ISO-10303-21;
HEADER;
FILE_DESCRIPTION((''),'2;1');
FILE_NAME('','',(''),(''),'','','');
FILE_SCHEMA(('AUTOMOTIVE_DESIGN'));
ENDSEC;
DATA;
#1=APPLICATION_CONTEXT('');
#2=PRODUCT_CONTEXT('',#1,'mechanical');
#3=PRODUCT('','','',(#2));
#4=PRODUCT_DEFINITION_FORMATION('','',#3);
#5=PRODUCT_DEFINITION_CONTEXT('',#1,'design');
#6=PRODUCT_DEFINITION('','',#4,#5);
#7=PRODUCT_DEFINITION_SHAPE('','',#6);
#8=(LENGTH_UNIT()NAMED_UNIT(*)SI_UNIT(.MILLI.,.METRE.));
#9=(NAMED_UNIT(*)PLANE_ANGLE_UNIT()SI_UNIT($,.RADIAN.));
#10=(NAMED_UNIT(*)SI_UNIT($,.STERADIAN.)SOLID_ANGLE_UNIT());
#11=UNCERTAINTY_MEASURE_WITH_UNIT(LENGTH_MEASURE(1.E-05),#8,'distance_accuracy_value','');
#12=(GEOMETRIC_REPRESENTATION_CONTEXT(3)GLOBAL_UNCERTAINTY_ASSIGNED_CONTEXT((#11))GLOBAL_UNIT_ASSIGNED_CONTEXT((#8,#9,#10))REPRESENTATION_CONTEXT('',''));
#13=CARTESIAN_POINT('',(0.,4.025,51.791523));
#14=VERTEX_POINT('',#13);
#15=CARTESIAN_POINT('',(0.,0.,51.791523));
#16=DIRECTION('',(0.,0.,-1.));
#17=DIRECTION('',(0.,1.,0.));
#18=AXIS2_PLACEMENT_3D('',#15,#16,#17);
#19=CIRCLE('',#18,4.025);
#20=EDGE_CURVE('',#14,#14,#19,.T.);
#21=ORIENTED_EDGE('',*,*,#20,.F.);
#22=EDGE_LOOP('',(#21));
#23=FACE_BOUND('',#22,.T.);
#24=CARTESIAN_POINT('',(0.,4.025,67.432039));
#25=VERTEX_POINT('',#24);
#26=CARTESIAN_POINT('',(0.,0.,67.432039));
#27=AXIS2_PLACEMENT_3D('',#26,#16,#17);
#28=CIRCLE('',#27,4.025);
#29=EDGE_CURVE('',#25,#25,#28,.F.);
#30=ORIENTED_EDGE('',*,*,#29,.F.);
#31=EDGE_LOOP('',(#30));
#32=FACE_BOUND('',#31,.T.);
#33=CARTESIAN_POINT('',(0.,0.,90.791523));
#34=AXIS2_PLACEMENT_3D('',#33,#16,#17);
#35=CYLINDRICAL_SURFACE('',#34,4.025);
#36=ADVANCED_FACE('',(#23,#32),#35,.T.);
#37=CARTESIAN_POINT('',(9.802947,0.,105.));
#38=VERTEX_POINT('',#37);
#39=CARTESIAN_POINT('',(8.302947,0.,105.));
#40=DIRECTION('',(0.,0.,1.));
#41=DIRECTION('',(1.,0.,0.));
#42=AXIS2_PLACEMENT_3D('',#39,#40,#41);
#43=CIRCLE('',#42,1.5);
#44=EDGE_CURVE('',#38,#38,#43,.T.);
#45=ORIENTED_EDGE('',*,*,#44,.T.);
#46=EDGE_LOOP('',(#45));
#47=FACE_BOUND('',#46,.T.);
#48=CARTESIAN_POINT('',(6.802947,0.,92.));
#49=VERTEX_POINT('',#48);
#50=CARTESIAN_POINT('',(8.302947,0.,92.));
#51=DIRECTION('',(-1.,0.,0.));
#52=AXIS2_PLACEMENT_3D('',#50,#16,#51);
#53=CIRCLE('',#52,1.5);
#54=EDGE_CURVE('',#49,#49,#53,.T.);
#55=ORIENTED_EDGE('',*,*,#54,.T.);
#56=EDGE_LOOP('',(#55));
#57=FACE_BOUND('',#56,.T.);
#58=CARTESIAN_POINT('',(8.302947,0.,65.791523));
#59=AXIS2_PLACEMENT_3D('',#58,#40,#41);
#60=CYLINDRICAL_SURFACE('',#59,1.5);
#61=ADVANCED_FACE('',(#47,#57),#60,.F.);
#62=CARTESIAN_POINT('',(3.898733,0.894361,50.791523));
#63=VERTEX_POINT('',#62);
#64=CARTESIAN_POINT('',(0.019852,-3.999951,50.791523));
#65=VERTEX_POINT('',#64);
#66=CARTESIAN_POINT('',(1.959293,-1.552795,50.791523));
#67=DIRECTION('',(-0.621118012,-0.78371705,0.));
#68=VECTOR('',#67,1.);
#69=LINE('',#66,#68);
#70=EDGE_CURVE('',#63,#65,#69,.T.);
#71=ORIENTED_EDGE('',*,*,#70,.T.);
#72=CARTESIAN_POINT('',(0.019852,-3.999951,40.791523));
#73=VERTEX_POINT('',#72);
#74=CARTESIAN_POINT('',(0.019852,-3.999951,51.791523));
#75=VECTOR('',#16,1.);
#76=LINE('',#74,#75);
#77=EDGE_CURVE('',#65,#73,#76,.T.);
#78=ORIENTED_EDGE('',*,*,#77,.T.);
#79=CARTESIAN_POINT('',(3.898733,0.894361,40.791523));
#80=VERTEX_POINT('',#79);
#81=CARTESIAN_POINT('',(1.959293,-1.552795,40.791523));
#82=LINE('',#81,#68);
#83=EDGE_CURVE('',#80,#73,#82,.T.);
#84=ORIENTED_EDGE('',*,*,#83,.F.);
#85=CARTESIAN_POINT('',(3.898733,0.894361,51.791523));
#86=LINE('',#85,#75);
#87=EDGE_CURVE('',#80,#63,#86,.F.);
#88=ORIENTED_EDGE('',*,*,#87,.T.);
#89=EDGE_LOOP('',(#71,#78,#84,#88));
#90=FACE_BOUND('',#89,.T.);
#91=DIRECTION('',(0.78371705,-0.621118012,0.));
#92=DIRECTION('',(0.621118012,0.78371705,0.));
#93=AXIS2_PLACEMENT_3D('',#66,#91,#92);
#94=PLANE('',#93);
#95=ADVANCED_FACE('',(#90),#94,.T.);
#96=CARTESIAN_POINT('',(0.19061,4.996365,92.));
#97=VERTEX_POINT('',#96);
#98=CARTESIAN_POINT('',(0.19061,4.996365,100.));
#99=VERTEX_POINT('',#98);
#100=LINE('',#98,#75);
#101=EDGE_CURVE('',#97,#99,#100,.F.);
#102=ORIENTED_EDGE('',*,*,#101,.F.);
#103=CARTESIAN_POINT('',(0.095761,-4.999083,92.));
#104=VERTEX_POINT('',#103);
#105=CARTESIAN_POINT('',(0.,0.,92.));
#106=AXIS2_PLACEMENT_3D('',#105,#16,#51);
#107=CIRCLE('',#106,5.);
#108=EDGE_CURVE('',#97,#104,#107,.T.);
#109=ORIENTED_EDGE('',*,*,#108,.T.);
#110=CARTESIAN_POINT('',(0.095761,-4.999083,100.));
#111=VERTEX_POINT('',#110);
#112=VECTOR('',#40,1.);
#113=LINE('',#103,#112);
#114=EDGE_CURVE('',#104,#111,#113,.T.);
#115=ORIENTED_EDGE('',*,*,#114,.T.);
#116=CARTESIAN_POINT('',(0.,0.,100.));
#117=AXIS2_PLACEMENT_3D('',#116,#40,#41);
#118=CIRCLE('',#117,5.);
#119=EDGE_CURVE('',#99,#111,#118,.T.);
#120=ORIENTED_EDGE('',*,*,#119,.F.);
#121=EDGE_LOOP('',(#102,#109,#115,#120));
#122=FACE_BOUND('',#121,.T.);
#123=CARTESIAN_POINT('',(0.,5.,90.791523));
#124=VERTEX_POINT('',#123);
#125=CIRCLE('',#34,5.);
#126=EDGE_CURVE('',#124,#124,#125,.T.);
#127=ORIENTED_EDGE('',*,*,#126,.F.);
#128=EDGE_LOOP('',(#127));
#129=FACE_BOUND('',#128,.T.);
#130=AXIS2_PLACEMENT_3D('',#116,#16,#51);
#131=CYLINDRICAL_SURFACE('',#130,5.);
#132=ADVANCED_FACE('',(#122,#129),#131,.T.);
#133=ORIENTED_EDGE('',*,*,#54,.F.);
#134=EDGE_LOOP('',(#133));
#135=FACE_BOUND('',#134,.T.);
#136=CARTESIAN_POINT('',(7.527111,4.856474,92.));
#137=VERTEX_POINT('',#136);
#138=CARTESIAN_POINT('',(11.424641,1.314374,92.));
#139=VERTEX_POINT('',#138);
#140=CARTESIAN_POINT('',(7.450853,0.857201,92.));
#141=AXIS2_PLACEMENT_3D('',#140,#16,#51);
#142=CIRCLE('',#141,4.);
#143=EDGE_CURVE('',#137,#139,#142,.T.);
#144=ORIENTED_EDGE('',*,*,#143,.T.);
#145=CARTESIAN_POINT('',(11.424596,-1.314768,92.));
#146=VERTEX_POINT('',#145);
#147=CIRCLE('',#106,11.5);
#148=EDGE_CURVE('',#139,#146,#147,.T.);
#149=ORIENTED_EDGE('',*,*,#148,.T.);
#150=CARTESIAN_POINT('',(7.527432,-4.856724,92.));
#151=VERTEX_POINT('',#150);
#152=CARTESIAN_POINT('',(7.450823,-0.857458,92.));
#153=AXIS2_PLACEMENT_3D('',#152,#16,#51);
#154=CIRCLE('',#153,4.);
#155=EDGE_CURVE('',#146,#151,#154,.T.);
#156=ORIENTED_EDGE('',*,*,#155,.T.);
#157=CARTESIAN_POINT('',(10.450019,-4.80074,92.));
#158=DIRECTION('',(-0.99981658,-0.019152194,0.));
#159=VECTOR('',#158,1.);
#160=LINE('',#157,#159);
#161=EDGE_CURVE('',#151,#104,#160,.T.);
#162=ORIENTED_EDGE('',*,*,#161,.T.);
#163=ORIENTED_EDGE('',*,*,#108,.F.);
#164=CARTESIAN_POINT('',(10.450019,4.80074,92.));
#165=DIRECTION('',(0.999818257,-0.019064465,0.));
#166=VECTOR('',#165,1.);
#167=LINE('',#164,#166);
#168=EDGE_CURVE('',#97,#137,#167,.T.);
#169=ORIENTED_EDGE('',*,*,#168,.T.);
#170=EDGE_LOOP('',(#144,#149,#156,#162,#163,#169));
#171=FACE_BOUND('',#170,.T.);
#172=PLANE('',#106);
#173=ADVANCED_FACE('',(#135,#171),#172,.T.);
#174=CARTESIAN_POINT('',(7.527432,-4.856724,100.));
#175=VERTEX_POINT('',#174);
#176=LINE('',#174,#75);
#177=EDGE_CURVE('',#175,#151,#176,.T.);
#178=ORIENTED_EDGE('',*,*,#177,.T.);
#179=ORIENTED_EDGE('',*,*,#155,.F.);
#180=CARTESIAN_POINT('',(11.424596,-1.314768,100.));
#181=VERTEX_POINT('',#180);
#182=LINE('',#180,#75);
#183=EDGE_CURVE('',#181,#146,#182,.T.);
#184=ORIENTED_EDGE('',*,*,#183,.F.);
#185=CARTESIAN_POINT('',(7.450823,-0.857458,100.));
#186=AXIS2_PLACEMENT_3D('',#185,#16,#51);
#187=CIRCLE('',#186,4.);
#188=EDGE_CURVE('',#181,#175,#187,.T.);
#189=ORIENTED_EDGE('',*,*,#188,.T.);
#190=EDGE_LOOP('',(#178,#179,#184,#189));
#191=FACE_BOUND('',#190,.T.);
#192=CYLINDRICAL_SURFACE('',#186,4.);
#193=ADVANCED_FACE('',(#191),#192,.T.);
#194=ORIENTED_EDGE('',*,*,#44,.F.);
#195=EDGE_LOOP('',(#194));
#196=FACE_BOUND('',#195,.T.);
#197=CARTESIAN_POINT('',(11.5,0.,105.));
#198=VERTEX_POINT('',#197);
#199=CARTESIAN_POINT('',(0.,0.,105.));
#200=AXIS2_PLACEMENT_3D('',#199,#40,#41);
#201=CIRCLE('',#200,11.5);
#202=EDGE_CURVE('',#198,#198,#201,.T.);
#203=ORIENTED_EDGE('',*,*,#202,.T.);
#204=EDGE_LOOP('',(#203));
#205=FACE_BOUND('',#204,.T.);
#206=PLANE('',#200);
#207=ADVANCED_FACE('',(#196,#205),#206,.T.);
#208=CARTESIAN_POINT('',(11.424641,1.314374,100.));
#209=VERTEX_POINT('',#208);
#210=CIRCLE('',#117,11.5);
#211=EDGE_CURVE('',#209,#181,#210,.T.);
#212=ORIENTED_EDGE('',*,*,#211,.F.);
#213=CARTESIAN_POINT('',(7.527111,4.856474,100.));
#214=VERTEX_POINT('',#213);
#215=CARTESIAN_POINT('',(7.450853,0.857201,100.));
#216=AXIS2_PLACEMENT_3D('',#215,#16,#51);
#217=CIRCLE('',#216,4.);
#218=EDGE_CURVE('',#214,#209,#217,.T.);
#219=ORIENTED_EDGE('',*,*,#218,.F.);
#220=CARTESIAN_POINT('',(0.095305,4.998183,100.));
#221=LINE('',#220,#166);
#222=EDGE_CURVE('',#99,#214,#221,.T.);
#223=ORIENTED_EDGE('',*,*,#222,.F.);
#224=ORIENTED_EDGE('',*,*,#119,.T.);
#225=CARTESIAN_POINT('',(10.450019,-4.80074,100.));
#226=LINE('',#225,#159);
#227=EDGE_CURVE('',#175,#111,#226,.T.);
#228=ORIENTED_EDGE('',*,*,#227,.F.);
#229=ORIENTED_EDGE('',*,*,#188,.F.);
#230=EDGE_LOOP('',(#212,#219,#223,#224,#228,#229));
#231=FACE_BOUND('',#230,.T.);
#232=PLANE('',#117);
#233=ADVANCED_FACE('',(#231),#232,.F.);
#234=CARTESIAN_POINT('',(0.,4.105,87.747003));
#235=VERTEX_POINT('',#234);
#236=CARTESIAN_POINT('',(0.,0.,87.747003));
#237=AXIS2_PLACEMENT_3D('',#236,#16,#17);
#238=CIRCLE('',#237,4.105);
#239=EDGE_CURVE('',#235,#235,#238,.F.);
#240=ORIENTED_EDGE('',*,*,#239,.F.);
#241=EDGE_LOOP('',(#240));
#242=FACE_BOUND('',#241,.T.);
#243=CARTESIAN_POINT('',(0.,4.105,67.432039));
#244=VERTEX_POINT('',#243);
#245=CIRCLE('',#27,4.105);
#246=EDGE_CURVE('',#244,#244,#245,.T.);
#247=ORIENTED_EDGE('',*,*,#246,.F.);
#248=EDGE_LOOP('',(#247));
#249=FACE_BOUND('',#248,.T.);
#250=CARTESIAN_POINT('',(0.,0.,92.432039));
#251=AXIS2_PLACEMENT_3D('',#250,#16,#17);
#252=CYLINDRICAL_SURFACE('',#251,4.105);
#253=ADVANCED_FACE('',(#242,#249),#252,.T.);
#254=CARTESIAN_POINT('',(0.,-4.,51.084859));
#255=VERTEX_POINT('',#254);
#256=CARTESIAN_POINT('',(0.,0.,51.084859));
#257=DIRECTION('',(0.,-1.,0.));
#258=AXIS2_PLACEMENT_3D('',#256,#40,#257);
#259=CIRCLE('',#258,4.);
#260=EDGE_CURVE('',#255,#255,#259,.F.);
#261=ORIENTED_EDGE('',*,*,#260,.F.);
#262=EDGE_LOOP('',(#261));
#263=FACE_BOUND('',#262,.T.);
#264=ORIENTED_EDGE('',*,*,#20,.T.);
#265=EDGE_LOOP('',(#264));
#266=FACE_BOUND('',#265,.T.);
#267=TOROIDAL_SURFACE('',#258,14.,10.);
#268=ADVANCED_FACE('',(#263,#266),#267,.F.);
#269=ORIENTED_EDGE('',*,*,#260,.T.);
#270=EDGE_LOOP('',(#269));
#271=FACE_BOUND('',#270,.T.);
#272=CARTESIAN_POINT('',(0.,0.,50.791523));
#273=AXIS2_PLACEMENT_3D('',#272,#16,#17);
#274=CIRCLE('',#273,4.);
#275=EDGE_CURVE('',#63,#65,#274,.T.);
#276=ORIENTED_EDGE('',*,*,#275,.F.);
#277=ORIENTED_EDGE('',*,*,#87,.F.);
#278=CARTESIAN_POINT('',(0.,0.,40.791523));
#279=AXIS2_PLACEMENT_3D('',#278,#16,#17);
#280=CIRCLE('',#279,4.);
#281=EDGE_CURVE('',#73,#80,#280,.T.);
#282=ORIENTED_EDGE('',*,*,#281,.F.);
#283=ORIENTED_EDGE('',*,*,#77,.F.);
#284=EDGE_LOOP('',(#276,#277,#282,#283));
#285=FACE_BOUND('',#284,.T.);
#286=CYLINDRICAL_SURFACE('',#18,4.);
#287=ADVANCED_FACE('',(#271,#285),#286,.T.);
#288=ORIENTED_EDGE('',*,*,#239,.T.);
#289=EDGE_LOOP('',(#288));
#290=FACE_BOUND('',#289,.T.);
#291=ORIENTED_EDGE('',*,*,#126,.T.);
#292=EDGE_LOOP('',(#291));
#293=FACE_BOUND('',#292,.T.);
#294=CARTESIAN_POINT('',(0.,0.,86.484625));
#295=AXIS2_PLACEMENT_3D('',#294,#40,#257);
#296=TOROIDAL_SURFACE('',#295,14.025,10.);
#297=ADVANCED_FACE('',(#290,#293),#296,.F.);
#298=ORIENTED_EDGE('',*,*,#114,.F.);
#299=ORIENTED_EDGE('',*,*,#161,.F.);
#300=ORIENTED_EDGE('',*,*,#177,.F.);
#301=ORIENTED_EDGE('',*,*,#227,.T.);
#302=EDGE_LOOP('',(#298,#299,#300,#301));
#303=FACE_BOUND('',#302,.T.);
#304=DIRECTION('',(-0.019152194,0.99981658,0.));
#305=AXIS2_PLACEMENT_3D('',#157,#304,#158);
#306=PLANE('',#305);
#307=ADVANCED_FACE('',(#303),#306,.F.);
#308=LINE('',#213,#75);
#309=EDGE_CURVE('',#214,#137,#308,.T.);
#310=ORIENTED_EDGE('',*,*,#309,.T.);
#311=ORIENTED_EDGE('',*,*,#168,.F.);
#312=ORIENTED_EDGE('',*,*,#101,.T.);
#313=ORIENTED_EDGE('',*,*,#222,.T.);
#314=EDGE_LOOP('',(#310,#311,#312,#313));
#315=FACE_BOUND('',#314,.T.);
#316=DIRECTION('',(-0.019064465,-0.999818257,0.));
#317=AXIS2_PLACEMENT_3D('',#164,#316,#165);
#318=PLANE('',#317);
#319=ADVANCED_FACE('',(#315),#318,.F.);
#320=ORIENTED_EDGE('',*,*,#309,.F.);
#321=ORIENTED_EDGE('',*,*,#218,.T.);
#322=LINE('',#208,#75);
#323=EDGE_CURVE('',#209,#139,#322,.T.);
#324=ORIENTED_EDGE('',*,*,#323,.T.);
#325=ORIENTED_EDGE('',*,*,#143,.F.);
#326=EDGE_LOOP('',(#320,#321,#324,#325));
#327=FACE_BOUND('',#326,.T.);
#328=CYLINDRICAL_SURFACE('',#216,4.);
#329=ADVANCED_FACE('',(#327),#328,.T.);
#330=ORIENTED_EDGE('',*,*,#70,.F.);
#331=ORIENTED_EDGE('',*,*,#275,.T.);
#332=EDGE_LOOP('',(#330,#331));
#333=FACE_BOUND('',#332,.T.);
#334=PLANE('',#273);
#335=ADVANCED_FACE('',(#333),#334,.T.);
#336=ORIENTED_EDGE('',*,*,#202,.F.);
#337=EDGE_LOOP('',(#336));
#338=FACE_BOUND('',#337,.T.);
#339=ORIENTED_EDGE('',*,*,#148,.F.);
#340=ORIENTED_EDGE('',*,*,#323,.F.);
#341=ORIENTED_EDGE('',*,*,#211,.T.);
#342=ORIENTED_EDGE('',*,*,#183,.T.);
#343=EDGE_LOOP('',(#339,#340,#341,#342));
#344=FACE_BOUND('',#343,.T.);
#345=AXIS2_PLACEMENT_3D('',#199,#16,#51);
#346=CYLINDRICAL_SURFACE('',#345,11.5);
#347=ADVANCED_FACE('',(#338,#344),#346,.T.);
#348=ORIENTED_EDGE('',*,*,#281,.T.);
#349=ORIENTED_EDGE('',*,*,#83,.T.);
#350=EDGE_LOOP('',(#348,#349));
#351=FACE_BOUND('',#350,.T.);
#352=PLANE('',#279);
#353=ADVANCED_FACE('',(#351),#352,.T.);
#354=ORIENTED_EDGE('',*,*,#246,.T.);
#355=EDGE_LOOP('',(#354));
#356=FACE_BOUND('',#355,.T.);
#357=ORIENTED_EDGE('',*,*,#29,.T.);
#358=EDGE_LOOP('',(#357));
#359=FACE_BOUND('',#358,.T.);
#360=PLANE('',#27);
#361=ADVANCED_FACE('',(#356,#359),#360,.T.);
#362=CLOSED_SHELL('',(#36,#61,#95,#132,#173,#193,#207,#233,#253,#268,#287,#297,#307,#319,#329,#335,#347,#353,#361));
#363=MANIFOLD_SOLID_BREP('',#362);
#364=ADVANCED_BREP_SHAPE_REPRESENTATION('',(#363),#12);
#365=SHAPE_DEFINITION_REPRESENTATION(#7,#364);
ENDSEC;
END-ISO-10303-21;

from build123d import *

# Parameters (mm, degrees)
SKETCH1_R               = 5
BOSS_EXTRUDE1_DEPTH     = 100
SKETCH2_R               = 11.5
BOSS_EXTRUDE2_DEPTH     = 5
SKETCH3_R               = 1.5
BOSS_EXTRUDE3_DEPTH     = 5
BOSS_EXTRUDE4_START     = 8
BOSS_EXTRUDE4_DEPTH     = 8
CUT_EXTRUDE2_DEPTH      = 8
CUT_EXTRUDE4_DEPTH      = 134.839635872
CUT_EXTRUDE4_DEPTH_BACK = 134.839635872
SKETCH7_W               = 13.423809299
SKETCH7_H               = 65.791523209
CUT_EXTRUDE5_DEPTH      = 48.105089111
CUT_EXTRUDE5_DEPTH_BACK = 48.105089111
SKETCH8_R               = 1.5
SKETCH9_R               = 5
SKETCH9_R_2             = 4.025
CUT_EXTRUDE6_DEPTH      = 25
FILLET1_R               = 10
BOSS_EXTRUDE5_START     = 25
SKETCH10_R              = 4.025
BOSS_EXTRUDE5_DEPTH     = 25
CUT_EXTRUDE7_DEPTH      = 10
SKETCH12_R              = 4.025
SKETCH12_R_2            = 4
CUT_EXTRUDE8_DEPTH      = 11
FILLET2_R               = 10
SKETCH13_R              = 4.105
SKETCH13_R_2            = 4.025
BOSS_EXTRUDE6_DEPTH     = 20
BOSS_EXTRUDE7_START     = 5
SKETCH14_R              = 4.105
BOSS_EXTRUDE7_DEPTH     = 5


with BuildPart() as part:
    # Sketch1 → Boss-Extrude1 (new body)
    with BuildSketch(Plane.XY):
        Circle(SKETCH1_R)
    extrude(amount=BOSS_EXTRUDE1_DEPTH)

    # Sketch2 → Boss-Extrude2 (add)
    with BuildSketch(Plane.XY.offset(100)):
        Circle(SKETCH2_R)
    extrude(amount=BOSS_EXTRUDE2_DEPTH)

    # Sketch3 → Boss-Extrude3 (add)
    with BuildSketch(Plane.XY.offset(105)):
        with Locations((8.302947015, 0)):
            Circle(SKETCH3_R)
    extrude(amount=BOSS_EXTRUDE3_DEPTH)

    # Sketch5 → Boss-Extrude4 (add)
    with BuildSketch(Plane(origin=(0, 0, 100), x_dir=(-1, 0, 0), z_dir=(0, 0, -1)).offset(BOSS_EXTRUDE4_START)):
        with BuildLine():
            Line((-10.45001903, 4.800739762), (0, 5))
            ThreePointArc((0, 5), (4.99977072, -0.04788268), (-0.095760969, -4.9990829))
            Line((-0.095760969, -4.9990829), (-10.45001903, -4.800739762))
            ThreePointArc((-10.45001903, -4.800739762), (-11.5, 0), (-10.45001903, 4.800739762))
        make_face()
    extrude(amount=-BOSS_EXTRUDE4_DEPTH)

    # Sketch6 → Cut-Extrude2 (cut)
    with BuildSketch(Plane(origin=(0, 0, 92), x_dir=(-1, 0, 0), z_dir=(0, 0, -1))):
        with BuildLine():
            ThreePointArc((-11.187749919, 2.661625773), (-11.326245042, 1.991525355), (-11.424640936, 1.314374177))
            ThreePointArc((-11.424640936, 1.314374177), (-10.141082355, 3.817380419), (-7.527110609, 4.856473577))
            Line((-7.527110609, 4.856473577), (-10.45001903, 4.800739762))
            ThreePointArc((-10.45001903, 4.800739762), (-10.871624232, 3.749371489), (-11.187749919, 2.661625773))
        make_face()
        with BuildLine():
            ThreePointArc((-11.424595573, -1.314768419), (-10.141131578, -3.817565911), (-7.527431975, -4.856723984))
            Line((-7.527431975, -4.856723984), (-10.45001903, -4.800739762))
            ThreePointArc((-10.45001903, -4.800739762), (-11.07531896, -3.09633815), (-11.424595573, -1.314768419))
        make_face()
    extrude(amount=-CUT_EXTRUDE2_DEPTH, mode=Mode.SUBTRACT)

    # Sketch7 → Cut-Extrude4 (cut, two sides: drawn at the far end of the back side and taken through both)
    with BuildSketch(Plane(origin=(-96.480203858, -4.620399557, 77.417416795), x_dir=(0.40721461787547164, -0.9133324996892062, 6.240488345448587e-15), z_dir=(0.9133324996892062, 0.40721461787547164, -3.9305527970726e-15)).offset(-CUT_EXTRUDE4_DEPTH_BACK)):
        with Locations((36.58009292, 44.521655191)):
            Rectangle(SKETCH7_W, SKETCH7_H)
    extrude(amount=CUT_EXTRUDE4_DEPTH + CUT_EXTRUDE4_DEPTH_BACK, mode=Mode.SUBTRACT)

    # Sketch8 → Cut-Extrude5 (cut, two sides: drawn at the far end of the back side and taken through both)
    with BuildSketch(Plane.XY.offset(110).offset(-CUT_EXTRUDE5_DEPTH_BACK)):
        with Locations((8.302947015, 0)):
            Circle(SKETCH8_R)
    extrude(amount=CUT_EXTRUDE5_DEPTH + CUT_EXTRUDE5_DEPTH_BACK, mode=Mode.SUBTRACT)

    # Sketch9 → Cut-Extrude6 (cut)
    with BuildSketch(Plane(origin=(0, 0, 65.791523209), x_dir=(-1, 0, 0), z_dir=(0, 0, -1))):
        with Locations(Location((0, 0, 0), (0, 0, 90))):
            Circle(SKETCH9_R)
        with Locations(Location((0, 0, 0), (0, 0, 90))):
            Circle(SKETCH9_R_2, mode=Mode.SUBTRACT)
    extrude(amount=-CUT_EXTRUDE6_DEPTH, mode=Mode.SUBTRACT)

    # Fillet1
    # the kernel refuses this fillet: 10 mm, written as the material it adds along each edge
    with BuildSketch(Plane(origin=(0, 0, 90.791523209), x_dir=(0, 1, 0), z_dir=(-1, 0, 0))) as fillet1_piece_1:
        with BuildLine():
            CenterArc((14.025, 4.306898536), FILLET1_R, 180, 25.511347951)
            Line((4.025, 4.306898536), (3.825, 4.306898536))
            Line((3.825, 4.306898536), (3.825, 0))
            Line((3.825, 0), (4.025, -0.2))
            ThreePointArc((4.025, -0.2), (4.5125, -0.2), (4.8195, -0.086137971))
            Line((4.8195, -0.086137971), (5, 0))
        make_face()
    revolve(axis=Axis((0, 0, 90.791523209), (0, 0, -1)))

    # Sketch10 → Boss-Extrude5 (add)
    with BuildSketch(Plane(origin=(0, 0, 65.791523209), x_dir=(-1, 0, 0), z_dir=(0, 0, -1)).offset(BOSS_EXTRUDE5_START)):
        with Locations(Location((0, 0, 0), (0, 0, 90))):
            Circle(SKETCH10_R)
    extrude(amount=-BOSS_EXTRUDE5_DEPTH)

    # Sketch11 → Cut-Extrude7 (cut)
    with BuildSketch(Plane(origin=(0, 0, 40.791523209), x_dir=(-1, 0, 0), z_dir=(0, 0, -1))):
        with BuildLine():
            Line((0, -4.025), (-3.918585251, 0.919409938))
            ThreePointArc((-3.918585251, 0.919409938), (-3.154461127, -2.5), (0, -4.025))
        make_face()
    extrude(amount=-CUT_EXTRUDE7_DEPTH, mode=Mode.SUBTRACT)

    # Sketch12 → Cut-Extrude8 (cut)
    with BuildSketch(Plane(origin=(0, 0, 40.791523209), x_dir=(-1, 0, 0), z_dir=(0, 0, -1))):
        with Locations(Location((0, 0, 0), (0, 0, 90))):
            Circle(SKETCH12_R)
        with Locations(Location((0, 0, 0), (0, 0, 90))):
            Circle(SKETCH12_R_2, mode=Mode.SUBTRACT)
    extrude(amount=-CUT_EXTRUDE8_DEPTH, mode=Mode.SUBTRACT)

    # Fillet2
    # the kernel refuses this fillet: 10 mm, written as the material it adds along each edge
    with BuildSketch(Plane(origin=(0, 0, 51.791523209), x_dir=(0, 1, 0), z_dir=(-1, 0, 0))) as fillet2_piece_1:
        with BuildLine():
            CenterArc((14, 0.706664701), FILLET2_R, 180, 4.052267945)
            Line((4, 0.706664701), (4, 0))
            Line((4, 0), (4.025, 0))
        make_face()
    revolve(axis=Axis((0, 0, 51.791523209), (0, 0, -1)))

    # Sketch13 → Boss-Extrude6 (add)
    with BuildSketch(Plane(origin=(0, 0, 72.432039474), x_dir=(-1, 0, 0), z_dir=(0, 0, -1))):
        with Locations(Location((0, 0, 0), (0, 0, 90))):
            Circle(SKETCH13_R)
        with Locations(Location((0, 0, 0), (0, 0, 90))):
            Circle(SKETCH13_R_2, mode=Mode.SUBTRACT)
    extrude(amount=-BOSS_EXTRUDE6_DEPTH)

    # Sketch14 → Boss-Extrude7 (add)
    with BuildSketch(Plane(origin=(0, 0, 72.432039474), x_dir=(-1, 0, 0), z_dir=(0, 0, -1)).offset(BOSS_EXTRUDE7_START)):
        with Locations(Location((0, 0, 0), (0, 0, 90))):
            Circle(SKETCH14_R)
    extrude(amount=-BOSS_EXTRUDE7_DEPTH)


solid = part.part
